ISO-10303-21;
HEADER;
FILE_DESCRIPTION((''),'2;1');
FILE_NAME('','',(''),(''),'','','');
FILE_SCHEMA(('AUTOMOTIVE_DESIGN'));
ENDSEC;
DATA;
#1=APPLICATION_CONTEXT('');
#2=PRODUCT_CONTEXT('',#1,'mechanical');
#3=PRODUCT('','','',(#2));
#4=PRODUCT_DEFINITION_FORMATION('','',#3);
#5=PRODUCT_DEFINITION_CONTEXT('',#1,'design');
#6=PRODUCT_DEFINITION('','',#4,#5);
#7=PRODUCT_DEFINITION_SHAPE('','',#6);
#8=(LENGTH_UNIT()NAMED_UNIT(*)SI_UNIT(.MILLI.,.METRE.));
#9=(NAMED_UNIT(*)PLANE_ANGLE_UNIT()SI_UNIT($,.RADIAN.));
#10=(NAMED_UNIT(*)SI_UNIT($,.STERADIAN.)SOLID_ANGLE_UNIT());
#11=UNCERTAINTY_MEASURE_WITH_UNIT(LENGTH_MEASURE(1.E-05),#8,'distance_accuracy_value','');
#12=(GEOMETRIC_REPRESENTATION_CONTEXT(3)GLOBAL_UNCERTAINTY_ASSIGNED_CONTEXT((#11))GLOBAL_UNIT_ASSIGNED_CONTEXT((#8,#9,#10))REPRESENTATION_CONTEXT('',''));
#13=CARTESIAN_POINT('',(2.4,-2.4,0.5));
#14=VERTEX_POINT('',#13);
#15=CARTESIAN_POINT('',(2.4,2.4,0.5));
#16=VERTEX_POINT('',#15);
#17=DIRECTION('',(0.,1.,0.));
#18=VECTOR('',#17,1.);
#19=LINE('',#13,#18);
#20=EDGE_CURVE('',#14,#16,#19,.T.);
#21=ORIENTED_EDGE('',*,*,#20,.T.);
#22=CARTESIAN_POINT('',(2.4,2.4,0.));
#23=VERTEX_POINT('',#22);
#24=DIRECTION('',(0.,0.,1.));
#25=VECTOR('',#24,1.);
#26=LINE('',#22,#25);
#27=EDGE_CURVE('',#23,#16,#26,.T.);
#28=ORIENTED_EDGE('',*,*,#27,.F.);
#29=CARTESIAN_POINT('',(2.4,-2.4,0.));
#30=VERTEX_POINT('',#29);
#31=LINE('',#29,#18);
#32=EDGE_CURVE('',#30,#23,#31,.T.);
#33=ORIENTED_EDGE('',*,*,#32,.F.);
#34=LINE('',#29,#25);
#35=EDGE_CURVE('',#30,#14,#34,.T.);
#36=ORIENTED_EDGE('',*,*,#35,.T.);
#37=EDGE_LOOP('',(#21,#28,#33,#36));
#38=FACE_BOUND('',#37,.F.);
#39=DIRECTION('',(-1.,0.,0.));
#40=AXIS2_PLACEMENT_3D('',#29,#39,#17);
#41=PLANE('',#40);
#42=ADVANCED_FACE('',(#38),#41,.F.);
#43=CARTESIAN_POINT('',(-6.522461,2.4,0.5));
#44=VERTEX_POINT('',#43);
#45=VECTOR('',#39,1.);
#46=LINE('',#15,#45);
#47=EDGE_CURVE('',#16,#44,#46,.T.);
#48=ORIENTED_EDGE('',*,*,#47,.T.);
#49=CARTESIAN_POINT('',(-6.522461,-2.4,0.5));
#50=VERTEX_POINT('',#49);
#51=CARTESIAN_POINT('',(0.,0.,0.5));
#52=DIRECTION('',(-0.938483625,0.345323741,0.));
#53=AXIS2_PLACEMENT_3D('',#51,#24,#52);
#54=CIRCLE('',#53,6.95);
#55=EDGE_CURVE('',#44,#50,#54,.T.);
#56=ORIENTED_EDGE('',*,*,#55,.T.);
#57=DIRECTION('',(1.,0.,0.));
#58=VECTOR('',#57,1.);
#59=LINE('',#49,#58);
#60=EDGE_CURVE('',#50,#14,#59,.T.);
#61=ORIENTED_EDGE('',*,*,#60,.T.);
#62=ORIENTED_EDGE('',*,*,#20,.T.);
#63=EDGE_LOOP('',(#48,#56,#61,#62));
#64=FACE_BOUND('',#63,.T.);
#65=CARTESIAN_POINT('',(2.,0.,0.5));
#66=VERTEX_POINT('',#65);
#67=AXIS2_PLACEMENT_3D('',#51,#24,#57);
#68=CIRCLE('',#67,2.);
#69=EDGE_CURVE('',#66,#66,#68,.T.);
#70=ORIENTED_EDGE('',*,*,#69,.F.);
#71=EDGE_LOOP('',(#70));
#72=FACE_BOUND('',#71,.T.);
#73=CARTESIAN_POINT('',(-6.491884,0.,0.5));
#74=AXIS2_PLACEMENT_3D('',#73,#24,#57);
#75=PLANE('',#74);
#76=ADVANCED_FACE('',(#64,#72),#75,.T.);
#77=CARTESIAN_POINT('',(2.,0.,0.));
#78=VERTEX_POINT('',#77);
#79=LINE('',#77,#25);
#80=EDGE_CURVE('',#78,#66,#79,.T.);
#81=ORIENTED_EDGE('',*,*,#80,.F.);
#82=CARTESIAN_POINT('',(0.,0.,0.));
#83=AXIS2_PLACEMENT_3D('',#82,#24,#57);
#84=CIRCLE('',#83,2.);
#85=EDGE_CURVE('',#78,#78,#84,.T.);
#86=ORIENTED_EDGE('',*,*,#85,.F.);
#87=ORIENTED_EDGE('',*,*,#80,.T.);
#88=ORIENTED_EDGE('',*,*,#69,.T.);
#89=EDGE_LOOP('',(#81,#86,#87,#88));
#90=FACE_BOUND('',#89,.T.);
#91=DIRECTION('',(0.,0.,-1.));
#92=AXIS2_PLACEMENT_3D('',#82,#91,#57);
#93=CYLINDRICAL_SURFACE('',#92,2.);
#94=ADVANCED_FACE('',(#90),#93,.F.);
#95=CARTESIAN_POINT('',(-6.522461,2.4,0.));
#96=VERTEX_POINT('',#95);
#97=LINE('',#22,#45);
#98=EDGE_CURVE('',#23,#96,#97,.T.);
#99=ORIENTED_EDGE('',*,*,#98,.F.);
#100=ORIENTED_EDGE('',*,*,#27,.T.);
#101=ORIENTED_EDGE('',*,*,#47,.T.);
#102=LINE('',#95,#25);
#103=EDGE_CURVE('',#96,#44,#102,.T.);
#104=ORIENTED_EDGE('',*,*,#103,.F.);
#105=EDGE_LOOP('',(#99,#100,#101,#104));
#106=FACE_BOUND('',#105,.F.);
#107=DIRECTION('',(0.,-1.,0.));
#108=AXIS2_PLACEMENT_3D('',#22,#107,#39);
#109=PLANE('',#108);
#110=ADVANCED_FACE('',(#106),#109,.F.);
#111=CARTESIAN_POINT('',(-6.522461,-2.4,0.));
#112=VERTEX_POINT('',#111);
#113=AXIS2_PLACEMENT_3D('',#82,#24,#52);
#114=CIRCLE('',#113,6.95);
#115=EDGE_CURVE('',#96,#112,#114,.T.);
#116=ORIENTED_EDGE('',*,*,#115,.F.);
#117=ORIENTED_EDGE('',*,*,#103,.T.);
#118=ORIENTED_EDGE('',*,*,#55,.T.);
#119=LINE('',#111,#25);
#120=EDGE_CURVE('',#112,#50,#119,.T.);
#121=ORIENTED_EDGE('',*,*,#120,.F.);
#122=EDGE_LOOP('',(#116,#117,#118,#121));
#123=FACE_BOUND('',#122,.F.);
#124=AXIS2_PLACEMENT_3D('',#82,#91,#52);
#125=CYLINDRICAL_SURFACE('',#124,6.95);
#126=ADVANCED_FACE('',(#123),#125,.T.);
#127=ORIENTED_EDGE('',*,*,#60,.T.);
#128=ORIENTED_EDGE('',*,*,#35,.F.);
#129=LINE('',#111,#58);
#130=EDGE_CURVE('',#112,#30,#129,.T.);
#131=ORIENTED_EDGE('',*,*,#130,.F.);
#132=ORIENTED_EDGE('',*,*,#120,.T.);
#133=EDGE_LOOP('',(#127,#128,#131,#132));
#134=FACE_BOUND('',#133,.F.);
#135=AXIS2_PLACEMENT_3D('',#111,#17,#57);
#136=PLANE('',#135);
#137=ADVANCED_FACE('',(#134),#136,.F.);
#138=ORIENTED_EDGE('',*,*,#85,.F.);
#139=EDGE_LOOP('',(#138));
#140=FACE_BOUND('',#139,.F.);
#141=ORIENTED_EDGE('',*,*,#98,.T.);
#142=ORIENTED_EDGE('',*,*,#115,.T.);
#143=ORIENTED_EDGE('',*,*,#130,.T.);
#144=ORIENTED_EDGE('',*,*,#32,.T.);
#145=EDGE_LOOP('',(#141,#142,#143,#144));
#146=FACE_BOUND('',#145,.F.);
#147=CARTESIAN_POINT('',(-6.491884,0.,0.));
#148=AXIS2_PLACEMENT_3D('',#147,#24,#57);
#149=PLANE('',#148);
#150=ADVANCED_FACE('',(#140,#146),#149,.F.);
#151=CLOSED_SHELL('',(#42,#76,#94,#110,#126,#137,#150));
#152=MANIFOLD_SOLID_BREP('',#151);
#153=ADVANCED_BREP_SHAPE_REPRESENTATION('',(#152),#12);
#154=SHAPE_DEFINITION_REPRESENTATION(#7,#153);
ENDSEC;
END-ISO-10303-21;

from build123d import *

# Parameters (mm, degrees)
F0_R     = 2
F1_DEPTH = 0.5


with BuildPart() as f1:
    # F0 (on Top) → F1 (new body)
    with BuildSketch(Plane.XY):
        with BuildLine():
            Line((-5.986860613, 2.4), (-6.5224611919, 2.4))
            ThreePointArc((-6.5224611919, 2.4), (-6.95, 0), (-6.5224611919, -2.4))
            Line((-6.5224611919, -2.4), (-5.986860613, -2.4))
            ThreePointArc((-5.986860613, -2.4), (-6.45, 0), (-5.986860613, 2.4))
        make_face()
        with BuildLine():
            Line((2.4, -2.4), (2.4, 2.4))
            Line((2.4, 2.4), (-5.986860613, 2.4))
            ThreePointArc((-5.986860613, 2.4), (-6.45, 0), (-5.986860613, -2.4))
            Line((-5.986860613, -2.4), (2.4, -2.4))
        make_face()
        Circle(F0_R, mode=Mode.SUBTRACT)
    extrude(amount=F1_DEPTH)


solid = f1.part
